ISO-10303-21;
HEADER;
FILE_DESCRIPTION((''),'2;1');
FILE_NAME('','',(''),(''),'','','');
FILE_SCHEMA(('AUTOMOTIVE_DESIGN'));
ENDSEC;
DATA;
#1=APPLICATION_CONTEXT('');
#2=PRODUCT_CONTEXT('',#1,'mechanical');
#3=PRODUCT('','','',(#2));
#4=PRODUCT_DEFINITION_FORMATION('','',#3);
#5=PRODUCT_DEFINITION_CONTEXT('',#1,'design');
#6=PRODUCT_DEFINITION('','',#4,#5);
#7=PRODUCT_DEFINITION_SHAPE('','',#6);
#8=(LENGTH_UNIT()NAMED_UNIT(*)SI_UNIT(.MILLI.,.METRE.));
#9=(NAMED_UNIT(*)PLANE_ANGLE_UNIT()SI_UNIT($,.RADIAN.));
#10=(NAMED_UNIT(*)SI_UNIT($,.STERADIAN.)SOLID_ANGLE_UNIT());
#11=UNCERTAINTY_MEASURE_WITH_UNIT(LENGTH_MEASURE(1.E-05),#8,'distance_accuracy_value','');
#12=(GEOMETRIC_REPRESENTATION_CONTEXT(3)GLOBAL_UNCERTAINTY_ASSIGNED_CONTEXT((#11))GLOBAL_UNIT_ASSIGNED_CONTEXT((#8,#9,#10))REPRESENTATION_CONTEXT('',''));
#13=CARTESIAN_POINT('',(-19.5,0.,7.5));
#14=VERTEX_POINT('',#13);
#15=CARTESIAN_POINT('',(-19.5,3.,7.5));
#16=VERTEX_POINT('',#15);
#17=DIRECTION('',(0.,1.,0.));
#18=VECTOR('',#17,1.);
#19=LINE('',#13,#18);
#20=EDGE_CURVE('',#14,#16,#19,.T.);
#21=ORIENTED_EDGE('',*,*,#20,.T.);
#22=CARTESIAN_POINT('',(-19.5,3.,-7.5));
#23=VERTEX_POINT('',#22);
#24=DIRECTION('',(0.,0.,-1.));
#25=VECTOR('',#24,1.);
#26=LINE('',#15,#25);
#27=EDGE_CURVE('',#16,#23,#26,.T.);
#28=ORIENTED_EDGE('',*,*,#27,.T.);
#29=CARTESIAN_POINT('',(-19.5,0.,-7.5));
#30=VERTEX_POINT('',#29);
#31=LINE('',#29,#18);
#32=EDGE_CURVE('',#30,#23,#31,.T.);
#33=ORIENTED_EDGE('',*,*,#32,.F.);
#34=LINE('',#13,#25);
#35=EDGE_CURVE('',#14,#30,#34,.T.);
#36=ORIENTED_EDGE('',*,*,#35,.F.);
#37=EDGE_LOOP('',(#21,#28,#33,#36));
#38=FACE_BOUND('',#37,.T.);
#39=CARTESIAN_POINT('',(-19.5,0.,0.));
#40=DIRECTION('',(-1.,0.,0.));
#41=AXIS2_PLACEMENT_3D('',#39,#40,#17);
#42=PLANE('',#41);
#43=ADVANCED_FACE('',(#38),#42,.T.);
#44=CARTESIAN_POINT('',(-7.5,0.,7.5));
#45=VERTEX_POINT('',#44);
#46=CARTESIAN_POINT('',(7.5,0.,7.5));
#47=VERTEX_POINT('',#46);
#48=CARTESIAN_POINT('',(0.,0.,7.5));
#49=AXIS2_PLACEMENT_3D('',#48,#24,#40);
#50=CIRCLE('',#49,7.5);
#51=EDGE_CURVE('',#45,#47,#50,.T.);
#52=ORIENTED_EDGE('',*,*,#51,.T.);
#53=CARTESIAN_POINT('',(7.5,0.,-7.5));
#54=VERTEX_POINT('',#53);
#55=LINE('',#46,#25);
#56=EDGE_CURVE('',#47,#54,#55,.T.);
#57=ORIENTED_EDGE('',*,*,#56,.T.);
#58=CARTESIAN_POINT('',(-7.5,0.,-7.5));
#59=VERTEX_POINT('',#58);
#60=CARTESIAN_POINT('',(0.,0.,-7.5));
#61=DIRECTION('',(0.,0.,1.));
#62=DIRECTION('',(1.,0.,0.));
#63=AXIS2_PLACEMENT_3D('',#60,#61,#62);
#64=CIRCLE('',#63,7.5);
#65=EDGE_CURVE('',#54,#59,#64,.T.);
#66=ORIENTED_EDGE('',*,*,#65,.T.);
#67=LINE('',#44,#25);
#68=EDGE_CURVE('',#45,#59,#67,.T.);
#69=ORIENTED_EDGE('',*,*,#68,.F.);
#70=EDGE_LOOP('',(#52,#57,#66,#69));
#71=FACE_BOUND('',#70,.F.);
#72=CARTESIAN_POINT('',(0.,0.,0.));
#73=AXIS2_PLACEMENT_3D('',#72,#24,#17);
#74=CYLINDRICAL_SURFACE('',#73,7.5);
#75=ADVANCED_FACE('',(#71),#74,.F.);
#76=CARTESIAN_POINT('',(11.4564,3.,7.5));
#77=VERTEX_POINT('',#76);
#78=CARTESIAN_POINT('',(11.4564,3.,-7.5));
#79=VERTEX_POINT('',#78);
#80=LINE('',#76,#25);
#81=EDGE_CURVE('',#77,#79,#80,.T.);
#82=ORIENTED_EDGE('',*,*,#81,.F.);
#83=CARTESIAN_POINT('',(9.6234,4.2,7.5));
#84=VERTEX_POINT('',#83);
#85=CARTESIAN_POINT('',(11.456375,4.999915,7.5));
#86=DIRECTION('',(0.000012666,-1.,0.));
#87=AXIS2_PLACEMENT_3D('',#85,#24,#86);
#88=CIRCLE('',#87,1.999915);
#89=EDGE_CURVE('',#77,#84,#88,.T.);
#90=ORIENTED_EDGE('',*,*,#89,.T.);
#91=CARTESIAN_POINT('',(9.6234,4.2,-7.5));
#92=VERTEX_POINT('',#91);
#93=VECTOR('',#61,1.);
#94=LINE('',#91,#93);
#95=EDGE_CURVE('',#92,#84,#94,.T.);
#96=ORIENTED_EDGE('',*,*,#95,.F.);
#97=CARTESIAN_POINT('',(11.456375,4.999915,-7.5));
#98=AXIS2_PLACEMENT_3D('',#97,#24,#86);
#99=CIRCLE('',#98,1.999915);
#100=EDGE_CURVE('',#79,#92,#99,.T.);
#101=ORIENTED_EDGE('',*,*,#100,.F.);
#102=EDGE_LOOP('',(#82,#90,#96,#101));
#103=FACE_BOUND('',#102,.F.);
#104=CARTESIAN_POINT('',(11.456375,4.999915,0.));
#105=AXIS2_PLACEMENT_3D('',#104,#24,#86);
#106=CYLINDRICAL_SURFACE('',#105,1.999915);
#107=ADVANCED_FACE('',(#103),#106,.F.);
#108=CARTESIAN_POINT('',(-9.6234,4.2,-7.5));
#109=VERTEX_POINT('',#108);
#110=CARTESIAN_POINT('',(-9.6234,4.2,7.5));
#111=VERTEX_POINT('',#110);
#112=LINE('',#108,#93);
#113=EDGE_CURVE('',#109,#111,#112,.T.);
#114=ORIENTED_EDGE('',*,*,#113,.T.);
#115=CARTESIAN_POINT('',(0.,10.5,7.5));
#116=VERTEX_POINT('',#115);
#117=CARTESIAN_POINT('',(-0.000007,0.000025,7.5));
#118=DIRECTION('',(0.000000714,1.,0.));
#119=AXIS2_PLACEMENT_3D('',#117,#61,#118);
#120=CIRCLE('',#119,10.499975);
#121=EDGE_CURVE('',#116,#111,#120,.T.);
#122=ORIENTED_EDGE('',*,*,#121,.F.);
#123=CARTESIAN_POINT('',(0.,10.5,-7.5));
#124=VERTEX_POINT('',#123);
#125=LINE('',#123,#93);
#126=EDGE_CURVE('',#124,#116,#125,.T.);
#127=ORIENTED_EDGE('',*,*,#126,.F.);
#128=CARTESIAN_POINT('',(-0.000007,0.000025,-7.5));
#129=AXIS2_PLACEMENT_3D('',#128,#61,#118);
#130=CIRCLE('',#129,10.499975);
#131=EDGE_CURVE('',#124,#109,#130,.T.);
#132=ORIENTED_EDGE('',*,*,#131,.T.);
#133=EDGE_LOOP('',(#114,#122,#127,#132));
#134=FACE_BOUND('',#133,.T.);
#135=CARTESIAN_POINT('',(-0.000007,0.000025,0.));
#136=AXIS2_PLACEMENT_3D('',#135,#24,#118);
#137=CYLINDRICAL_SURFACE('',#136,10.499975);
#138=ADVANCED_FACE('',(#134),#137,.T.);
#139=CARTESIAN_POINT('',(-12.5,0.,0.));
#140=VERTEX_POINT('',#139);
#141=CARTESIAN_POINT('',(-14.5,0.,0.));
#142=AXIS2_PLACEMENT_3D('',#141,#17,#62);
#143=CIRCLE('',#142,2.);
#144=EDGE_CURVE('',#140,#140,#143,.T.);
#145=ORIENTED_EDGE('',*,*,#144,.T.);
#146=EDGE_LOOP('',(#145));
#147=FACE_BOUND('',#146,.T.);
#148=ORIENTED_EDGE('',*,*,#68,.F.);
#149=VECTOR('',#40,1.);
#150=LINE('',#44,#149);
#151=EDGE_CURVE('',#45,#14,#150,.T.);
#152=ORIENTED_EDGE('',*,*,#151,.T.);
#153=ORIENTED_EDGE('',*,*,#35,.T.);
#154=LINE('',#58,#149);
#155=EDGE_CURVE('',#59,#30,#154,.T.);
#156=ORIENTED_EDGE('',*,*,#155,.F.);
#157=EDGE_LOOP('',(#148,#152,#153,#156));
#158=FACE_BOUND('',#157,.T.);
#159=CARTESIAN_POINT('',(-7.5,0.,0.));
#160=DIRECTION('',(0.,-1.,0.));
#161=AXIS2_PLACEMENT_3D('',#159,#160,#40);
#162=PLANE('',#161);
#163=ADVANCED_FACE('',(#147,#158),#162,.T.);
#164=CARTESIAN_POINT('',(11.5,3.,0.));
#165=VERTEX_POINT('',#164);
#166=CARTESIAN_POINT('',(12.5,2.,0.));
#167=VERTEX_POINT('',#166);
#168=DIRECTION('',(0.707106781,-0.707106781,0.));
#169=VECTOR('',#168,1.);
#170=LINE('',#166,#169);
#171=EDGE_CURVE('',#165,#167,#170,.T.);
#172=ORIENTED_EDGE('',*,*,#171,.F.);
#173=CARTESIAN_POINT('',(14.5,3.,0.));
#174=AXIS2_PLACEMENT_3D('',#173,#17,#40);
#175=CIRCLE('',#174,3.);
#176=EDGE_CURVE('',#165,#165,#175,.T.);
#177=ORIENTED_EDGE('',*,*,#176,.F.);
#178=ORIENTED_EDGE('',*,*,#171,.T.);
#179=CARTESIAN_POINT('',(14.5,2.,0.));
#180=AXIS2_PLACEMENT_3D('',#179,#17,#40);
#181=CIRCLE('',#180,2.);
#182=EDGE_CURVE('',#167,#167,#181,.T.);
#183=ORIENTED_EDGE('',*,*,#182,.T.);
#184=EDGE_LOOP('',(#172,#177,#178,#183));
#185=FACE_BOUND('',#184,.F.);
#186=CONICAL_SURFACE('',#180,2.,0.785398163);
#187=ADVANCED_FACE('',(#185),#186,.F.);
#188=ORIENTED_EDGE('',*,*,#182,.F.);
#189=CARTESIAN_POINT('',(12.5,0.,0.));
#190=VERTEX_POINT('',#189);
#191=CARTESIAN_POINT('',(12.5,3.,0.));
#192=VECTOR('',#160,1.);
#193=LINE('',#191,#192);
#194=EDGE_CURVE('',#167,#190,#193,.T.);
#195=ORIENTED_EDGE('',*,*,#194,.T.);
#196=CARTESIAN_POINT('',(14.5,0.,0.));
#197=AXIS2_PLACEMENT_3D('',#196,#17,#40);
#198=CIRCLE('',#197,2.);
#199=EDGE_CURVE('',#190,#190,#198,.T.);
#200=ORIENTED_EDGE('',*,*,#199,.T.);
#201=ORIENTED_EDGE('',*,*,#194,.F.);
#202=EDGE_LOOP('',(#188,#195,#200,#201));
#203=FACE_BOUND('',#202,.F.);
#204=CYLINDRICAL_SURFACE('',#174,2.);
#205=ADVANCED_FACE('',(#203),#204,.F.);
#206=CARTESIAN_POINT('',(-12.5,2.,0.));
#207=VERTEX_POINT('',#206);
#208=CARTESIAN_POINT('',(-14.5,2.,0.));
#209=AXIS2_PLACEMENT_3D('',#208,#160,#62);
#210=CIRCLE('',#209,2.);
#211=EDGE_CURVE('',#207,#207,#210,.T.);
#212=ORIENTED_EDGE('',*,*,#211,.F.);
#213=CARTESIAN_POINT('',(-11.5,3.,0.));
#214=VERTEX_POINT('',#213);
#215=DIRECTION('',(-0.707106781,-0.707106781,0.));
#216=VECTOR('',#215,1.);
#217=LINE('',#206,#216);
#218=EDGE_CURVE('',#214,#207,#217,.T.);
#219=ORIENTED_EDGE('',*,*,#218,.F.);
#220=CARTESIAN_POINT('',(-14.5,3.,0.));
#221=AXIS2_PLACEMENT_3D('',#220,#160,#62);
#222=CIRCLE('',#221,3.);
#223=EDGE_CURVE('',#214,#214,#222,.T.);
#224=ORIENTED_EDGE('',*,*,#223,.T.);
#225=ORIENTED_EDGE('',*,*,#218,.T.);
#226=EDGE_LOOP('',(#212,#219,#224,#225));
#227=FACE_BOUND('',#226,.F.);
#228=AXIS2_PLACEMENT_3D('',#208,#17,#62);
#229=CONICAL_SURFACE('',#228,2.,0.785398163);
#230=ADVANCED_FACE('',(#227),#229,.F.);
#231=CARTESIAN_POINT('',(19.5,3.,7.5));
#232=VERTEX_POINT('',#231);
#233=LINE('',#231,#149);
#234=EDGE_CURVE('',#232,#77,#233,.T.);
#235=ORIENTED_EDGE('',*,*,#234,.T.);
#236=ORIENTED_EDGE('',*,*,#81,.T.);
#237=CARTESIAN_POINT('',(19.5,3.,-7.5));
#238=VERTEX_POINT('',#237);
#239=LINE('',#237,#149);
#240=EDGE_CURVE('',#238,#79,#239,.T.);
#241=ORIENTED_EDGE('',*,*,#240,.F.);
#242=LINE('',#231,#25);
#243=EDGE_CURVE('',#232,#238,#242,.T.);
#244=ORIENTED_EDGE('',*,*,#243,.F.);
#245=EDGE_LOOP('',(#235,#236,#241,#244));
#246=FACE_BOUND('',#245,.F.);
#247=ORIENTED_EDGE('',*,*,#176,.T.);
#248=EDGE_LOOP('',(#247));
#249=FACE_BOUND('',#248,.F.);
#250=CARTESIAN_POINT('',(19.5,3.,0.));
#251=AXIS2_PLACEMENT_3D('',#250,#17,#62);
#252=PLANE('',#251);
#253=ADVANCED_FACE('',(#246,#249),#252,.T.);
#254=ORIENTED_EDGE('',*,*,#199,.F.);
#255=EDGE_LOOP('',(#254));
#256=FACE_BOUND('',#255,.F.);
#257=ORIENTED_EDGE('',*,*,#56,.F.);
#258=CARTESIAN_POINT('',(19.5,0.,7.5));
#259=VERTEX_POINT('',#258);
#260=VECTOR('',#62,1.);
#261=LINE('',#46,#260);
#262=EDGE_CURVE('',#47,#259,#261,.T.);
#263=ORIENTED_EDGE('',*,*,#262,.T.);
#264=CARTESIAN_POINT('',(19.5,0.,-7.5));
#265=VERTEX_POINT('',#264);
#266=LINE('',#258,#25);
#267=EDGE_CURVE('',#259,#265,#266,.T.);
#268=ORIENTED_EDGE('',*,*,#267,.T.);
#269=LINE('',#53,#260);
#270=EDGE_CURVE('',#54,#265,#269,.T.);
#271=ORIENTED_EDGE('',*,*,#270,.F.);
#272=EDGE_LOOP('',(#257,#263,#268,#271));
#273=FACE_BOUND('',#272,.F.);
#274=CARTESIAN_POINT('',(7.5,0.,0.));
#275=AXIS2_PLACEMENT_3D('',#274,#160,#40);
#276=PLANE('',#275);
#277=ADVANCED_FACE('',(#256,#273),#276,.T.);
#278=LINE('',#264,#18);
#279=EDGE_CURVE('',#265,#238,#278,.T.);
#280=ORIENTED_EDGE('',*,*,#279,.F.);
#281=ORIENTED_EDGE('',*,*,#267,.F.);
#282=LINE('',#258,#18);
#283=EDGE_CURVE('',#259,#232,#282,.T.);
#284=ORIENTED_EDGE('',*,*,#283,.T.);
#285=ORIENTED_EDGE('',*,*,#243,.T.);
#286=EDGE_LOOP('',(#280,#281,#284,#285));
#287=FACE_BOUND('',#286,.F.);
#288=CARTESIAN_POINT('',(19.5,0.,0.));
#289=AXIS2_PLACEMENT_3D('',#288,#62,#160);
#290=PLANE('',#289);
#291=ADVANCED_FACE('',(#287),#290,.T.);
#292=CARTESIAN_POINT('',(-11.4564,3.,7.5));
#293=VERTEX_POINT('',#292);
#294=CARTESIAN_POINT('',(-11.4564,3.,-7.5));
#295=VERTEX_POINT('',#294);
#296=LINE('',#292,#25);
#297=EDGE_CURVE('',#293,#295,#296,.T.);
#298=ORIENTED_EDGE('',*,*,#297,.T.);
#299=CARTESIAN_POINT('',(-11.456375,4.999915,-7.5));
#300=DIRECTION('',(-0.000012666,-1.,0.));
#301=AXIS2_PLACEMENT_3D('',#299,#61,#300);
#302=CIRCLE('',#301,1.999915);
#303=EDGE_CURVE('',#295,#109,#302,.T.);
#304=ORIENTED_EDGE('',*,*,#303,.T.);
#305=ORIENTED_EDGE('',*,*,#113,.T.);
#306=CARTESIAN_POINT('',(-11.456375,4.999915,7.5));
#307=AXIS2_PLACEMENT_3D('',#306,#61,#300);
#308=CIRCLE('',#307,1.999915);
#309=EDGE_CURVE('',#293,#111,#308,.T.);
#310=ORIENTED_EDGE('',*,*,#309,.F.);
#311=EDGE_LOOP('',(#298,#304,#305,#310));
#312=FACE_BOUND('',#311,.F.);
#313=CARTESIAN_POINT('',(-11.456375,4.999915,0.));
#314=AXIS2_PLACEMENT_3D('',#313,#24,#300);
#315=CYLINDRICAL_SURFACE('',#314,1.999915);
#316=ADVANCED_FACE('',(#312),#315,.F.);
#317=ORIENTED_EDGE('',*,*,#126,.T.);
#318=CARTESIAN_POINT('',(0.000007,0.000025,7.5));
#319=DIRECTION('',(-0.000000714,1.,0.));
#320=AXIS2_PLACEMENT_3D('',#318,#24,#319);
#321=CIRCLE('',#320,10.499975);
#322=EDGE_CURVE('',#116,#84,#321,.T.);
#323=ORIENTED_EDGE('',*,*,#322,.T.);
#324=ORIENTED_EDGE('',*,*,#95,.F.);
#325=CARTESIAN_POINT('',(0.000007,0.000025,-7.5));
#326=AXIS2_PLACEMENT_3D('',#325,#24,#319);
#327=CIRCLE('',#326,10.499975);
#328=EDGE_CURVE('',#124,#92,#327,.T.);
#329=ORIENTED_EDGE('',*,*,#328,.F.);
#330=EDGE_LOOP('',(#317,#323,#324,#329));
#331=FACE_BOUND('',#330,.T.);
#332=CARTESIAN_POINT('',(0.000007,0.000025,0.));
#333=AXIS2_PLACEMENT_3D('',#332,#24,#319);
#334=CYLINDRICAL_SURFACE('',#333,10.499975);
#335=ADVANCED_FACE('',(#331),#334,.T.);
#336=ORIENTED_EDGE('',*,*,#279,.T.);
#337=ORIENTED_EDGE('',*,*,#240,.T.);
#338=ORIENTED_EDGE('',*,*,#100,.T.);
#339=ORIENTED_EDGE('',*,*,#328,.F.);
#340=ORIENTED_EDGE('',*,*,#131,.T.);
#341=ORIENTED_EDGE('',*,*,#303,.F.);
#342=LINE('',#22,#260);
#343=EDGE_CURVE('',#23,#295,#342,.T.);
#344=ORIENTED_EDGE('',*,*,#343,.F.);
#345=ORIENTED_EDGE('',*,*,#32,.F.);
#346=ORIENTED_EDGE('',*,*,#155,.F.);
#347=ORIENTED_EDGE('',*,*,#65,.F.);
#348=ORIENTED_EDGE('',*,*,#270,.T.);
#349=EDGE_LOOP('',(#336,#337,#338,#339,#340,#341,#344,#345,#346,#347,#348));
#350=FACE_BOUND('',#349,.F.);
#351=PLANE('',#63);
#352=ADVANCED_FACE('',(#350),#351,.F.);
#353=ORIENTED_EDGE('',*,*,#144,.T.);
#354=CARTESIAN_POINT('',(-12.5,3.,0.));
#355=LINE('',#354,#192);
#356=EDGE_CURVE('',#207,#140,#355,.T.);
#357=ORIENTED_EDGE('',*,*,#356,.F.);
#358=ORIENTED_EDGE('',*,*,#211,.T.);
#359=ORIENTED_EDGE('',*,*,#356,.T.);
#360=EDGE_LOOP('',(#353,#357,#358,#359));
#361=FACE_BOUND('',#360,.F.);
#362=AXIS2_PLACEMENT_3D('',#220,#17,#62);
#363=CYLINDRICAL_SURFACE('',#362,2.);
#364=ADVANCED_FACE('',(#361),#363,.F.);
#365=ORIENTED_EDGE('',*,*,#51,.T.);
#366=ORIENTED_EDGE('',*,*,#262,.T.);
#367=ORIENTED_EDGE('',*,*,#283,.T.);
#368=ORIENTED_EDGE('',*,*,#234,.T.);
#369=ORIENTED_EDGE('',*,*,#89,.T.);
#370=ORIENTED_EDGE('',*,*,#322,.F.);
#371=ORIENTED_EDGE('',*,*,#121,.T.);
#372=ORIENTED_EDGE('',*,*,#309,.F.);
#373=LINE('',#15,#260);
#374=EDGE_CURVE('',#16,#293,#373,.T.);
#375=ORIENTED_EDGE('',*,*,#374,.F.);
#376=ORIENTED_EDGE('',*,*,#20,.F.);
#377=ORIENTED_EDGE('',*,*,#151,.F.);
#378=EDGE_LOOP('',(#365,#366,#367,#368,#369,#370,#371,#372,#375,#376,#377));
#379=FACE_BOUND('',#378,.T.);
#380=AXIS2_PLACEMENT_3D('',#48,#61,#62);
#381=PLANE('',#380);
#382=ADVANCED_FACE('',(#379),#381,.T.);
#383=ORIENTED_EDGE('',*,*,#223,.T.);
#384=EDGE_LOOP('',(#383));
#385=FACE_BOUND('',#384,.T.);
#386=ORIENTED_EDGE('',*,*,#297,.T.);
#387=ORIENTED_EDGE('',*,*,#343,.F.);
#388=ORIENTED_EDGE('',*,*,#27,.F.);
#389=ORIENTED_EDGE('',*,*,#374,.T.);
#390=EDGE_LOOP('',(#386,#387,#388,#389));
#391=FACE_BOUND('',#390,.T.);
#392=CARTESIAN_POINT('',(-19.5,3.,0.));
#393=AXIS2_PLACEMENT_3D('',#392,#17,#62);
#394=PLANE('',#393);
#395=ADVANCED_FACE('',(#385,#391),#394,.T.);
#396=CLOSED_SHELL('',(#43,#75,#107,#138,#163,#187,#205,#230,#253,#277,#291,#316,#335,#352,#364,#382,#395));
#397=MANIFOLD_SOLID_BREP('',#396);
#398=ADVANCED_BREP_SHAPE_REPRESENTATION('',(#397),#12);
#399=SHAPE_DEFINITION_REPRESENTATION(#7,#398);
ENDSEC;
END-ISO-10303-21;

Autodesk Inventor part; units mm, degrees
ref_plane "YZ Plane" through (0, 0, 0) normal (1, 0, 0) x (0, 1, 0)
ref_plane "XZ Plane" through (0, 0, 0) normal (0, 1, 0) x (-1, 0, 0)
ref_plane "XY Plane" through (0, 0, 0) normal (0, 0, 1) x (1, 0, 0)
sketch "Sketch1" plane through (0, 0, 0) normal (0, 0, 1) x (1, 0, 0)
  arc A0 (0, 7.5) -> (-7.5, 0) centre (0, 0) ccw
  line L0 (-7.5, 0) -> (-19.5, 0)
  line L1 (-19.5, 0) -> (-19.5, 3)
  arc A1 (0, 10.5) -> (-9.6234, 4.2) centre (0, 0) ccw
  line L2 (-19.5, 3) -> (-11.4564, 3)
  line L3 (0, 10.5) -> (0, 7.5)
  arc A2 (-11.4564, 3) -> (-9.6234, 4.2) centre (-11.4564, 5) ccw
  point P0 (-10.0623, 3)
  dimension "d0" = 15
  dimension "d1" = 12
  dimension "d2" = 3
  dimension "d3" = 3
  dimension "d4" = 2
extrude "Extrusion1" add sketch "Sketch1" along normal mid plane 15
sketch "Sketch2" plane through (-19.5, 3, 7.5) normal (0, 1, 0) x (1, 0, 0)
  line L0 (-3.9, 7.5) -> (23.4, 7.5) projected
  circle A0 centre (5, 7.5) radius 2
  line L1 (0, 15) -> (0, 0) projected
  point P0 (19.5, 7.5)
  dimension "d7" = 4
  dimension "d8" = 5
extrude "Extrusion2" cut sketch "Sketch2" against normal blind 15
chamfer "Chamfer1" distance 1 angle 45 1 edges at (-16.5, 3, 0)
mirror "Mirror1" about plane through (0, 7.5, 0) normal (1, 0, 0) of "Extrusion1", "Extrusion2", "Chamfer1"
properties part number "CableWallMount"
